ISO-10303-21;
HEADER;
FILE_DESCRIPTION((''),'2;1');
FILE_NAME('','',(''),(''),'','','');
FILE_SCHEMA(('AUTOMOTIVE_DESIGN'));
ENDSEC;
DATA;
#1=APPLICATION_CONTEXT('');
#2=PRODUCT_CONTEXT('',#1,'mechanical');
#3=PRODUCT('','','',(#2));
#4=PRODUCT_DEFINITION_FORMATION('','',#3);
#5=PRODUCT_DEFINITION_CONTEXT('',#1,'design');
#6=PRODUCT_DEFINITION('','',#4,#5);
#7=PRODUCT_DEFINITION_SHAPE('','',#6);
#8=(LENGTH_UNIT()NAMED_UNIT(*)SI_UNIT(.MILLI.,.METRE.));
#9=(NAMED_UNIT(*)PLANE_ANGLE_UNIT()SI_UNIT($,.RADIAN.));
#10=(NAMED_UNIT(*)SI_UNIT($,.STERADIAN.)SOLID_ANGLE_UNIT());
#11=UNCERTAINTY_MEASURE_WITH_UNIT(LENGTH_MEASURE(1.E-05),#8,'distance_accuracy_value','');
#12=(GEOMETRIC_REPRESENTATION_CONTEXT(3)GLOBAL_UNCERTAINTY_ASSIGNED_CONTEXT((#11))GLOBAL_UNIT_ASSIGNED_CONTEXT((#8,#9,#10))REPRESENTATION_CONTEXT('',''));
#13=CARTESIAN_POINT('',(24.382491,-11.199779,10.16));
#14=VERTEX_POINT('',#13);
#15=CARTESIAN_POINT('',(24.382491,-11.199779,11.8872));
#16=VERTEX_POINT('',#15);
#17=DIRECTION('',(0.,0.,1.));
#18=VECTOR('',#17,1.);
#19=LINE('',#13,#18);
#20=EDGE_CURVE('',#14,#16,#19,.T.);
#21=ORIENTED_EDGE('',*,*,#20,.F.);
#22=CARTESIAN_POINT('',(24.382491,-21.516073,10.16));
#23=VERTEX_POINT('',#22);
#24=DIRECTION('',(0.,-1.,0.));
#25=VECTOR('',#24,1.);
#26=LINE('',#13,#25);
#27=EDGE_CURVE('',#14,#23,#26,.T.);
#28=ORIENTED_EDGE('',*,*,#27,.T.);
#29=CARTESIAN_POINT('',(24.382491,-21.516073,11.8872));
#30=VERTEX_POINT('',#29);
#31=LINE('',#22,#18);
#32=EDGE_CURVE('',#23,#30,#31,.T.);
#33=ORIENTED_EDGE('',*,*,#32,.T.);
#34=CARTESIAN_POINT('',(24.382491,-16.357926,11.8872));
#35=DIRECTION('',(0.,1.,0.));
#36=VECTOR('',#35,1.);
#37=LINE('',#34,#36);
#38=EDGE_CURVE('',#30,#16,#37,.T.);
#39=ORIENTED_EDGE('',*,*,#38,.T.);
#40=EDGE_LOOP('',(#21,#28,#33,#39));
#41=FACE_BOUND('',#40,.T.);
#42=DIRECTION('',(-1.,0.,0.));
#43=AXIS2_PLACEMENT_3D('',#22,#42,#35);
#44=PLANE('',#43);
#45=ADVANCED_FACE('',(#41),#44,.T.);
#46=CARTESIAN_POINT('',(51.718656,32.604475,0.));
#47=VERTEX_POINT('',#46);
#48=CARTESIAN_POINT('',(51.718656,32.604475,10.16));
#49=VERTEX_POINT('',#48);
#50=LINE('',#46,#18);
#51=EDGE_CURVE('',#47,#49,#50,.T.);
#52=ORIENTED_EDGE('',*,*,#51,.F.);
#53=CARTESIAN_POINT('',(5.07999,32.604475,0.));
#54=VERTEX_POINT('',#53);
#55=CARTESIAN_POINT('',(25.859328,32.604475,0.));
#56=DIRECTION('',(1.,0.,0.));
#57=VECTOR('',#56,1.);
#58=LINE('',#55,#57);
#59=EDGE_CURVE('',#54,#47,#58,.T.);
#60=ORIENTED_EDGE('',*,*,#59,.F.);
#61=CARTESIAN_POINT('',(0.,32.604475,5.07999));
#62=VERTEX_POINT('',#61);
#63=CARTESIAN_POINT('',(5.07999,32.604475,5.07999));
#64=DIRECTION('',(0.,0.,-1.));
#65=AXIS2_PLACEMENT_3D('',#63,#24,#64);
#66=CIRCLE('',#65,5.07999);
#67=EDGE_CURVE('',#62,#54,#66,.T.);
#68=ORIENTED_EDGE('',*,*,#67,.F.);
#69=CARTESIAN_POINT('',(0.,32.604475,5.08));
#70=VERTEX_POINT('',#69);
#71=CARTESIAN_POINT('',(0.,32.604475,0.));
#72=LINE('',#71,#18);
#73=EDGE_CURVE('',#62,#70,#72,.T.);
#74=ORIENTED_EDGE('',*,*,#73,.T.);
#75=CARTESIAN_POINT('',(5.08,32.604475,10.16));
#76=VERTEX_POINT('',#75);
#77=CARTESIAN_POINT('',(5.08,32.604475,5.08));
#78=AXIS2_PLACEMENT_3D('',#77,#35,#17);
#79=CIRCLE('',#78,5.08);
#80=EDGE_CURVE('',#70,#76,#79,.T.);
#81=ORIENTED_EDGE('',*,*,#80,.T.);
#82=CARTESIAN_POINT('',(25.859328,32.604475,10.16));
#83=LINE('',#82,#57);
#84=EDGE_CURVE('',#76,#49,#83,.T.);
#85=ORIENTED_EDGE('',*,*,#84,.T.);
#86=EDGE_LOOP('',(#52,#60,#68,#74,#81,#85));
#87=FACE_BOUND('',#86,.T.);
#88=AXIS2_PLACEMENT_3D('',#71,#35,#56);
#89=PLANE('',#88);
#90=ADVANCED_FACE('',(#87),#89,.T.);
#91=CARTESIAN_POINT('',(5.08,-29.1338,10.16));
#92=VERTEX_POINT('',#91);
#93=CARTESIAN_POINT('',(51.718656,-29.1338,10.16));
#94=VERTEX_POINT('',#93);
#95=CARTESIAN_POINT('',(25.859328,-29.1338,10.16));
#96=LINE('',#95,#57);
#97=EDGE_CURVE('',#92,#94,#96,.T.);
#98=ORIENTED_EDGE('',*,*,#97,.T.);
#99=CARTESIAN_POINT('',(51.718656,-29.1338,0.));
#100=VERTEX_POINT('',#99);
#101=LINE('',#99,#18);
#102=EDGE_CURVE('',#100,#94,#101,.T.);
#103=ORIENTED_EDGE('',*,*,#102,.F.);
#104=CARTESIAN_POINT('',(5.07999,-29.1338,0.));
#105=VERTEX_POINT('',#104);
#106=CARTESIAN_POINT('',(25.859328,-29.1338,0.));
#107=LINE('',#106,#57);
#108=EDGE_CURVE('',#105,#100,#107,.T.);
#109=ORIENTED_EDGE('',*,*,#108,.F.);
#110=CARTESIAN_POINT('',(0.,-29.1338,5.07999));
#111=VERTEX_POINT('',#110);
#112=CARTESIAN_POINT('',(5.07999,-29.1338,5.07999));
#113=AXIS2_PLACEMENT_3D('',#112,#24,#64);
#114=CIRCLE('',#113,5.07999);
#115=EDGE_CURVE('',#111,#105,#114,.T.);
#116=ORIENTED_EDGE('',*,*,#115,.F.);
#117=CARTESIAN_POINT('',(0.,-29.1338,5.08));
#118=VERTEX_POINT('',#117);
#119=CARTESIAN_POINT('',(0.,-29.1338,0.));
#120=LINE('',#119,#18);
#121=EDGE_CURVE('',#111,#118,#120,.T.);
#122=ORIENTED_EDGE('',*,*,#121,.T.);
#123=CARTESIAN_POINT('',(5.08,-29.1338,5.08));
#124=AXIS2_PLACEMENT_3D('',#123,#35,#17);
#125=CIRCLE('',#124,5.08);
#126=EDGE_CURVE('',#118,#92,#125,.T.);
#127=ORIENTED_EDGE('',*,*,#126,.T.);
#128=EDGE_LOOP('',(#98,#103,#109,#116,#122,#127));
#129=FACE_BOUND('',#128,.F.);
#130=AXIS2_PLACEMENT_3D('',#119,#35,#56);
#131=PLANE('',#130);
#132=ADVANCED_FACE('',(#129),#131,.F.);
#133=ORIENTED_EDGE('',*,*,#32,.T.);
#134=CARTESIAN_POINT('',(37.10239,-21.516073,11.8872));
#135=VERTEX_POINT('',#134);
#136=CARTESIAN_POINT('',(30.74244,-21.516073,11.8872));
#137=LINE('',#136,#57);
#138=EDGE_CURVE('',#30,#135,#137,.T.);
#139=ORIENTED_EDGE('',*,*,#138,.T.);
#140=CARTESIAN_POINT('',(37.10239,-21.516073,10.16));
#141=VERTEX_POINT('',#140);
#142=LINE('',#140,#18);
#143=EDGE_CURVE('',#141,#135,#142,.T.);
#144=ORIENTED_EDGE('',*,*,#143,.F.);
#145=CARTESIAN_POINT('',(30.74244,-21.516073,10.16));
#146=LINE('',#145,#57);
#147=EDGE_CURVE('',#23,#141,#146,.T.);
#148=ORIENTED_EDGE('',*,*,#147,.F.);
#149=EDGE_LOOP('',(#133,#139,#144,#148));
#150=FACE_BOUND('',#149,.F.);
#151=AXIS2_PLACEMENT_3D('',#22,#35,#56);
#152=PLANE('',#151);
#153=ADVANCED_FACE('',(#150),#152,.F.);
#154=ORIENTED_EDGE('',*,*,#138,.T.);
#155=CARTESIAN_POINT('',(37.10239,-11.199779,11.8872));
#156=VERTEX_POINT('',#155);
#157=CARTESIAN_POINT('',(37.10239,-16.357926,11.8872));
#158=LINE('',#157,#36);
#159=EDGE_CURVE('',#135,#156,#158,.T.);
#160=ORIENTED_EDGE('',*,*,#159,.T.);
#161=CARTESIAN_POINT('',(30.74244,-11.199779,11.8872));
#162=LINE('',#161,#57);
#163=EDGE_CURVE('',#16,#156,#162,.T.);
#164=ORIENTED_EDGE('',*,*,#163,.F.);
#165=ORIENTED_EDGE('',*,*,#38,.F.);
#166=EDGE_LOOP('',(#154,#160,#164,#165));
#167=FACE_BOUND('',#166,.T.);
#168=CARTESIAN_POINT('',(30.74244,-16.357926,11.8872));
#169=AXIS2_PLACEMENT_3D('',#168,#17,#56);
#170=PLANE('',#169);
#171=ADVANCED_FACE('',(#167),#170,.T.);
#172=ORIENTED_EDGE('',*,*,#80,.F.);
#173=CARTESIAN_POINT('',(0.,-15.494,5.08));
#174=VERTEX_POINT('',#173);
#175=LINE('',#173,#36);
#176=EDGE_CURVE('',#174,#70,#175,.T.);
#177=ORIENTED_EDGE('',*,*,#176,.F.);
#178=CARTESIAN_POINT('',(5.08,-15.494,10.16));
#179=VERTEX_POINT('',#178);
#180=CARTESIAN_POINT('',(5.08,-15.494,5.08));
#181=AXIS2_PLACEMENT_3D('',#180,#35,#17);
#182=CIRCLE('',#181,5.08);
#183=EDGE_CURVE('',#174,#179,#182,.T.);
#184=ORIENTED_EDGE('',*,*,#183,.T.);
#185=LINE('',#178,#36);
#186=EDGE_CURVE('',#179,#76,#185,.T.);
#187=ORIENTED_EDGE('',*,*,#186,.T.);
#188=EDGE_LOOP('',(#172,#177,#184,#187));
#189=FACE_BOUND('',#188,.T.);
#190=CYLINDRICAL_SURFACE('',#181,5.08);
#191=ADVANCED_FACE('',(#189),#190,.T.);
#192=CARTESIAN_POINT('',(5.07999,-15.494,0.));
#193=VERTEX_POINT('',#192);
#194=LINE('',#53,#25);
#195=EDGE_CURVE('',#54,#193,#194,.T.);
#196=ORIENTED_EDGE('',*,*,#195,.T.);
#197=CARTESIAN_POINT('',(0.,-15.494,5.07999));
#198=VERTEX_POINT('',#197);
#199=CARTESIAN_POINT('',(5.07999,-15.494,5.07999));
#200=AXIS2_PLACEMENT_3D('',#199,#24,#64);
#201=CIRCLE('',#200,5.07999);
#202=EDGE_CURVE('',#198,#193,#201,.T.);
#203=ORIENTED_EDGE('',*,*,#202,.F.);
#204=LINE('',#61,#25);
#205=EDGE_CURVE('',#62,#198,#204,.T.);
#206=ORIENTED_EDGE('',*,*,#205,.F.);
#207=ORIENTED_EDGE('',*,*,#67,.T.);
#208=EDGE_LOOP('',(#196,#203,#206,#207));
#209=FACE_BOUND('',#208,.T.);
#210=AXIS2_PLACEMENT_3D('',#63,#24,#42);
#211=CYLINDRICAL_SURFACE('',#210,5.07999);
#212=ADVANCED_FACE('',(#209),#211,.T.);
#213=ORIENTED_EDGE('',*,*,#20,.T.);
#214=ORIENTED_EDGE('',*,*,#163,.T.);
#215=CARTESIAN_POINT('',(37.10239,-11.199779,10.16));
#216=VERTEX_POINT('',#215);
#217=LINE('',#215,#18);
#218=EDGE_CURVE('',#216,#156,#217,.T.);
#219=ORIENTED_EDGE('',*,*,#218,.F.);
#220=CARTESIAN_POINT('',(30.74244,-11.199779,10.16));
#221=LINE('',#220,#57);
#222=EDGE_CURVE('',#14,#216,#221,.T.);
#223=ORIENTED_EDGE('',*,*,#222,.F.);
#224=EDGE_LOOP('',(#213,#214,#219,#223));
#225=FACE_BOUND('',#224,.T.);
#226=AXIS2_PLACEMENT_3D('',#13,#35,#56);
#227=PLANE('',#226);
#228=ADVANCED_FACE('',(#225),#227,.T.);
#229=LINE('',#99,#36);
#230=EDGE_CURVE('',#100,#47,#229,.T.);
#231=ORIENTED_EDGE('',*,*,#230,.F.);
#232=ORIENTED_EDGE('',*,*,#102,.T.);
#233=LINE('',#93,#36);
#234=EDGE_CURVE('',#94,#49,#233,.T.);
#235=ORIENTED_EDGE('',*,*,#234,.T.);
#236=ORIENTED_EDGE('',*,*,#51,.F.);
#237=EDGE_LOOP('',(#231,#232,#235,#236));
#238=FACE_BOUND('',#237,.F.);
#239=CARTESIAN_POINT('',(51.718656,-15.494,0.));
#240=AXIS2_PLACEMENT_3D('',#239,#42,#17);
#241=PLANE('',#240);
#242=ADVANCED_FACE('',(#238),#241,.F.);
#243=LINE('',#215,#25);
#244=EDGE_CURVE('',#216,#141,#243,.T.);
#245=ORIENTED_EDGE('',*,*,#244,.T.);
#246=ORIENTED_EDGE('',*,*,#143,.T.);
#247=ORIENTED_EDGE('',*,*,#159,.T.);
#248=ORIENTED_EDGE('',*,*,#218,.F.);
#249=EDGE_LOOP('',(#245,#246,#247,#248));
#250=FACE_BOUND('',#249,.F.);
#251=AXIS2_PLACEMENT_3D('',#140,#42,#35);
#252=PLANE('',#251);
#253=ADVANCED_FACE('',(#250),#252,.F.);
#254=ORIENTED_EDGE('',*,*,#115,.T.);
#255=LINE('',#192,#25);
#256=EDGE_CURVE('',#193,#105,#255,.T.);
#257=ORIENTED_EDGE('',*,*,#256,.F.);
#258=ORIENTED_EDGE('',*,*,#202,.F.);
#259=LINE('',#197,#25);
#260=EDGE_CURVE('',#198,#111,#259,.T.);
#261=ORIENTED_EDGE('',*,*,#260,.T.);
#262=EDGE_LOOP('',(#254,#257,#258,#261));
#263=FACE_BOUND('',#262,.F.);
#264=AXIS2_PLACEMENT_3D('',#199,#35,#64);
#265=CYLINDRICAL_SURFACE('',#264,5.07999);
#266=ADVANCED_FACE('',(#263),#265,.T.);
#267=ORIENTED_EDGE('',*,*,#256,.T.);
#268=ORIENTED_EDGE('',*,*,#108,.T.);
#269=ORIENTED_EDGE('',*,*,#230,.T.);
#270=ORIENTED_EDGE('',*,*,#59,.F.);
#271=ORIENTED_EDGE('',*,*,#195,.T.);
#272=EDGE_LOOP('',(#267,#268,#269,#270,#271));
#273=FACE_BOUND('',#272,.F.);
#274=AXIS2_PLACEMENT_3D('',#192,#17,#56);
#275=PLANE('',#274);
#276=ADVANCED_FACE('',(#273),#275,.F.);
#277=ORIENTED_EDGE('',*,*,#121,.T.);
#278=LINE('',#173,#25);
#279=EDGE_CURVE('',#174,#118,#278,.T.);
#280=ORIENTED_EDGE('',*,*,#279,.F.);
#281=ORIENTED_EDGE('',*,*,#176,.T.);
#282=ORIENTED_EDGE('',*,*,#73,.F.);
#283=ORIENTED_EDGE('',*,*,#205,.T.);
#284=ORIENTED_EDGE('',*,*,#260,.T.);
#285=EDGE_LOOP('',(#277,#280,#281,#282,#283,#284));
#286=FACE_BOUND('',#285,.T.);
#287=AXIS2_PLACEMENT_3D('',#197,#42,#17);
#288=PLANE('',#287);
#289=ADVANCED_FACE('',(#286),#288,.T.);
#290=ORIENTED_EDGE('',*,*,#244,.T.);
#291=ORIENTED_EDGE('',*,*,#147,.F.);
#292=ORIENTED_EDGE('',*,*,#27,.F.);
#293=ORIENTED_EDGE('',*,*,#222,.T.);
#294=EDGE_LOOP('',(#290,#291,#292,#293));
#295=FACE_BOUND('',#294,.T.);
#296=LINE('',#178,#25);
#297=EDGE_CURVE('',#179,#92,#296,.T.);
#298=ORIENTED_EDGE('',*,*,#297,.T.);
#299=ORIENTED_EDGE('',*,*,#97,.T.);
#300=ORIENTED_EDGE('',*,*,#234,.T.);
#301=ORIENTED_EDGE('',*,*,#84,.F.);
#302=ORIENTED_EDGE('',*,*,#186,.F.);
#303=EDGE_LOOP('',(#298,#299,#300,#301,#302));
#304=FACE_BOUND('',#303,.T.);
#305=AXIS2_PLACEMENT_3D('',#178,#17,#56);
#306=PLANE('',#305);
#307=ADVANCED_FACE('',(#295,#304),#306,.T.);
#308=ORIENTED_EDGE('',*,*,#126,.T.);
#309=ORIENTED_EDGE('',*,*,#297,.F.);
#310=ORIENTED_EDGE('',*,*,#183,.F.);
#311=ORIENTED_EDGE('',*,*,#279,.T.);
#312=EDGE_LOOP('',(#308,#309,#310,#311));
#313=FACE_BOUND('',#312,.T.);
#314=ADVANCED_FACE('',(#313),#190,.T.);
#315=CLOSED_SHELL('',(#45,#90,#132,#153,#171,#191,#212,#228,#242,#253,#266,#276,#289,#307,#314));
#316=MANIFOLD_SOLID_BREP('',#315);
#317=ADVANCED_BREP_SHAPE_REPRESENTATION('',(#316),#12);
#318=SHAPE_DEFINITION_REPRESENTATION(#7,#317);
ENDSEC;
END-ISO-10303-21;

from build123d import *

# Parameters (mm, degrees)
F0_W     = 51.7186559737
F0_H     = 32.6044745743
F1_DEPTH = 10.16
F2_DEPTH = 15.494
F4_R     = 5.08
F5_R     = 5.07999
F6_DEPTH = 13.6398
F7_W     = 12.719899416
F7_H     = 10.316294618
F8_DEPTH = 1.7272


# Not quite as in the source:
# - a fillet or chamfer is up to 0.001 mm smaller than in the source, because OpenCascade refuses the exact size


with BuildPart() as f1:
    # F0 (on Top) → F1 (new body)
    with BuildSketch(Plane.XY):
        with Locations((25.8593279868, 16.3022372872)):
            Rectangle(F0_W, F0_H)
    extrude(amount=F1_DEPTH)

    # F2 (add): a face of the model
    f2_faces = [f1.faces().sort_by_distance(p)[0] for p in [
        (25.8593279868, 0, 5.08),
    ]]
    extrude(f2_faces, amount=F2_DEPTH)

    # F4
    f4_edges = [f1.edges().sort_by_distance(p)[0] for p in [
        (0, 8.555237, 10.16),
    ]]
    fillet(f4_edges, radius=F4_R)

    # F5 (radius 5.08 in the source; OpenCascade refuses exactly that, so slightly less here)
    f5_edges = [f1.edges().sort_by_distance(p)[0] for p in [
        (0, 8.555237, 0),
    ]]
    fillet(f5_edges, radius=F5_R)

    # F6 (add): a face of the model
    f6_faces = [f1.faces().sort_by_distance(p)[0] for p in [
        (26.3917193742, -15.494, 5.0799998568),
    ]]
    extrude(f6_faces, amount=F6_DEPTH)

    # F7 (on face) → F8 (join)
    with BuildSketch(Plane.XY.offset(10.16)):
        with Locations((30.7424403727, -16.3579261862)):
            Rectangle(F7_W, F7_H)
    extrude(amount=F8_DEPTH)


solid = f1.part
